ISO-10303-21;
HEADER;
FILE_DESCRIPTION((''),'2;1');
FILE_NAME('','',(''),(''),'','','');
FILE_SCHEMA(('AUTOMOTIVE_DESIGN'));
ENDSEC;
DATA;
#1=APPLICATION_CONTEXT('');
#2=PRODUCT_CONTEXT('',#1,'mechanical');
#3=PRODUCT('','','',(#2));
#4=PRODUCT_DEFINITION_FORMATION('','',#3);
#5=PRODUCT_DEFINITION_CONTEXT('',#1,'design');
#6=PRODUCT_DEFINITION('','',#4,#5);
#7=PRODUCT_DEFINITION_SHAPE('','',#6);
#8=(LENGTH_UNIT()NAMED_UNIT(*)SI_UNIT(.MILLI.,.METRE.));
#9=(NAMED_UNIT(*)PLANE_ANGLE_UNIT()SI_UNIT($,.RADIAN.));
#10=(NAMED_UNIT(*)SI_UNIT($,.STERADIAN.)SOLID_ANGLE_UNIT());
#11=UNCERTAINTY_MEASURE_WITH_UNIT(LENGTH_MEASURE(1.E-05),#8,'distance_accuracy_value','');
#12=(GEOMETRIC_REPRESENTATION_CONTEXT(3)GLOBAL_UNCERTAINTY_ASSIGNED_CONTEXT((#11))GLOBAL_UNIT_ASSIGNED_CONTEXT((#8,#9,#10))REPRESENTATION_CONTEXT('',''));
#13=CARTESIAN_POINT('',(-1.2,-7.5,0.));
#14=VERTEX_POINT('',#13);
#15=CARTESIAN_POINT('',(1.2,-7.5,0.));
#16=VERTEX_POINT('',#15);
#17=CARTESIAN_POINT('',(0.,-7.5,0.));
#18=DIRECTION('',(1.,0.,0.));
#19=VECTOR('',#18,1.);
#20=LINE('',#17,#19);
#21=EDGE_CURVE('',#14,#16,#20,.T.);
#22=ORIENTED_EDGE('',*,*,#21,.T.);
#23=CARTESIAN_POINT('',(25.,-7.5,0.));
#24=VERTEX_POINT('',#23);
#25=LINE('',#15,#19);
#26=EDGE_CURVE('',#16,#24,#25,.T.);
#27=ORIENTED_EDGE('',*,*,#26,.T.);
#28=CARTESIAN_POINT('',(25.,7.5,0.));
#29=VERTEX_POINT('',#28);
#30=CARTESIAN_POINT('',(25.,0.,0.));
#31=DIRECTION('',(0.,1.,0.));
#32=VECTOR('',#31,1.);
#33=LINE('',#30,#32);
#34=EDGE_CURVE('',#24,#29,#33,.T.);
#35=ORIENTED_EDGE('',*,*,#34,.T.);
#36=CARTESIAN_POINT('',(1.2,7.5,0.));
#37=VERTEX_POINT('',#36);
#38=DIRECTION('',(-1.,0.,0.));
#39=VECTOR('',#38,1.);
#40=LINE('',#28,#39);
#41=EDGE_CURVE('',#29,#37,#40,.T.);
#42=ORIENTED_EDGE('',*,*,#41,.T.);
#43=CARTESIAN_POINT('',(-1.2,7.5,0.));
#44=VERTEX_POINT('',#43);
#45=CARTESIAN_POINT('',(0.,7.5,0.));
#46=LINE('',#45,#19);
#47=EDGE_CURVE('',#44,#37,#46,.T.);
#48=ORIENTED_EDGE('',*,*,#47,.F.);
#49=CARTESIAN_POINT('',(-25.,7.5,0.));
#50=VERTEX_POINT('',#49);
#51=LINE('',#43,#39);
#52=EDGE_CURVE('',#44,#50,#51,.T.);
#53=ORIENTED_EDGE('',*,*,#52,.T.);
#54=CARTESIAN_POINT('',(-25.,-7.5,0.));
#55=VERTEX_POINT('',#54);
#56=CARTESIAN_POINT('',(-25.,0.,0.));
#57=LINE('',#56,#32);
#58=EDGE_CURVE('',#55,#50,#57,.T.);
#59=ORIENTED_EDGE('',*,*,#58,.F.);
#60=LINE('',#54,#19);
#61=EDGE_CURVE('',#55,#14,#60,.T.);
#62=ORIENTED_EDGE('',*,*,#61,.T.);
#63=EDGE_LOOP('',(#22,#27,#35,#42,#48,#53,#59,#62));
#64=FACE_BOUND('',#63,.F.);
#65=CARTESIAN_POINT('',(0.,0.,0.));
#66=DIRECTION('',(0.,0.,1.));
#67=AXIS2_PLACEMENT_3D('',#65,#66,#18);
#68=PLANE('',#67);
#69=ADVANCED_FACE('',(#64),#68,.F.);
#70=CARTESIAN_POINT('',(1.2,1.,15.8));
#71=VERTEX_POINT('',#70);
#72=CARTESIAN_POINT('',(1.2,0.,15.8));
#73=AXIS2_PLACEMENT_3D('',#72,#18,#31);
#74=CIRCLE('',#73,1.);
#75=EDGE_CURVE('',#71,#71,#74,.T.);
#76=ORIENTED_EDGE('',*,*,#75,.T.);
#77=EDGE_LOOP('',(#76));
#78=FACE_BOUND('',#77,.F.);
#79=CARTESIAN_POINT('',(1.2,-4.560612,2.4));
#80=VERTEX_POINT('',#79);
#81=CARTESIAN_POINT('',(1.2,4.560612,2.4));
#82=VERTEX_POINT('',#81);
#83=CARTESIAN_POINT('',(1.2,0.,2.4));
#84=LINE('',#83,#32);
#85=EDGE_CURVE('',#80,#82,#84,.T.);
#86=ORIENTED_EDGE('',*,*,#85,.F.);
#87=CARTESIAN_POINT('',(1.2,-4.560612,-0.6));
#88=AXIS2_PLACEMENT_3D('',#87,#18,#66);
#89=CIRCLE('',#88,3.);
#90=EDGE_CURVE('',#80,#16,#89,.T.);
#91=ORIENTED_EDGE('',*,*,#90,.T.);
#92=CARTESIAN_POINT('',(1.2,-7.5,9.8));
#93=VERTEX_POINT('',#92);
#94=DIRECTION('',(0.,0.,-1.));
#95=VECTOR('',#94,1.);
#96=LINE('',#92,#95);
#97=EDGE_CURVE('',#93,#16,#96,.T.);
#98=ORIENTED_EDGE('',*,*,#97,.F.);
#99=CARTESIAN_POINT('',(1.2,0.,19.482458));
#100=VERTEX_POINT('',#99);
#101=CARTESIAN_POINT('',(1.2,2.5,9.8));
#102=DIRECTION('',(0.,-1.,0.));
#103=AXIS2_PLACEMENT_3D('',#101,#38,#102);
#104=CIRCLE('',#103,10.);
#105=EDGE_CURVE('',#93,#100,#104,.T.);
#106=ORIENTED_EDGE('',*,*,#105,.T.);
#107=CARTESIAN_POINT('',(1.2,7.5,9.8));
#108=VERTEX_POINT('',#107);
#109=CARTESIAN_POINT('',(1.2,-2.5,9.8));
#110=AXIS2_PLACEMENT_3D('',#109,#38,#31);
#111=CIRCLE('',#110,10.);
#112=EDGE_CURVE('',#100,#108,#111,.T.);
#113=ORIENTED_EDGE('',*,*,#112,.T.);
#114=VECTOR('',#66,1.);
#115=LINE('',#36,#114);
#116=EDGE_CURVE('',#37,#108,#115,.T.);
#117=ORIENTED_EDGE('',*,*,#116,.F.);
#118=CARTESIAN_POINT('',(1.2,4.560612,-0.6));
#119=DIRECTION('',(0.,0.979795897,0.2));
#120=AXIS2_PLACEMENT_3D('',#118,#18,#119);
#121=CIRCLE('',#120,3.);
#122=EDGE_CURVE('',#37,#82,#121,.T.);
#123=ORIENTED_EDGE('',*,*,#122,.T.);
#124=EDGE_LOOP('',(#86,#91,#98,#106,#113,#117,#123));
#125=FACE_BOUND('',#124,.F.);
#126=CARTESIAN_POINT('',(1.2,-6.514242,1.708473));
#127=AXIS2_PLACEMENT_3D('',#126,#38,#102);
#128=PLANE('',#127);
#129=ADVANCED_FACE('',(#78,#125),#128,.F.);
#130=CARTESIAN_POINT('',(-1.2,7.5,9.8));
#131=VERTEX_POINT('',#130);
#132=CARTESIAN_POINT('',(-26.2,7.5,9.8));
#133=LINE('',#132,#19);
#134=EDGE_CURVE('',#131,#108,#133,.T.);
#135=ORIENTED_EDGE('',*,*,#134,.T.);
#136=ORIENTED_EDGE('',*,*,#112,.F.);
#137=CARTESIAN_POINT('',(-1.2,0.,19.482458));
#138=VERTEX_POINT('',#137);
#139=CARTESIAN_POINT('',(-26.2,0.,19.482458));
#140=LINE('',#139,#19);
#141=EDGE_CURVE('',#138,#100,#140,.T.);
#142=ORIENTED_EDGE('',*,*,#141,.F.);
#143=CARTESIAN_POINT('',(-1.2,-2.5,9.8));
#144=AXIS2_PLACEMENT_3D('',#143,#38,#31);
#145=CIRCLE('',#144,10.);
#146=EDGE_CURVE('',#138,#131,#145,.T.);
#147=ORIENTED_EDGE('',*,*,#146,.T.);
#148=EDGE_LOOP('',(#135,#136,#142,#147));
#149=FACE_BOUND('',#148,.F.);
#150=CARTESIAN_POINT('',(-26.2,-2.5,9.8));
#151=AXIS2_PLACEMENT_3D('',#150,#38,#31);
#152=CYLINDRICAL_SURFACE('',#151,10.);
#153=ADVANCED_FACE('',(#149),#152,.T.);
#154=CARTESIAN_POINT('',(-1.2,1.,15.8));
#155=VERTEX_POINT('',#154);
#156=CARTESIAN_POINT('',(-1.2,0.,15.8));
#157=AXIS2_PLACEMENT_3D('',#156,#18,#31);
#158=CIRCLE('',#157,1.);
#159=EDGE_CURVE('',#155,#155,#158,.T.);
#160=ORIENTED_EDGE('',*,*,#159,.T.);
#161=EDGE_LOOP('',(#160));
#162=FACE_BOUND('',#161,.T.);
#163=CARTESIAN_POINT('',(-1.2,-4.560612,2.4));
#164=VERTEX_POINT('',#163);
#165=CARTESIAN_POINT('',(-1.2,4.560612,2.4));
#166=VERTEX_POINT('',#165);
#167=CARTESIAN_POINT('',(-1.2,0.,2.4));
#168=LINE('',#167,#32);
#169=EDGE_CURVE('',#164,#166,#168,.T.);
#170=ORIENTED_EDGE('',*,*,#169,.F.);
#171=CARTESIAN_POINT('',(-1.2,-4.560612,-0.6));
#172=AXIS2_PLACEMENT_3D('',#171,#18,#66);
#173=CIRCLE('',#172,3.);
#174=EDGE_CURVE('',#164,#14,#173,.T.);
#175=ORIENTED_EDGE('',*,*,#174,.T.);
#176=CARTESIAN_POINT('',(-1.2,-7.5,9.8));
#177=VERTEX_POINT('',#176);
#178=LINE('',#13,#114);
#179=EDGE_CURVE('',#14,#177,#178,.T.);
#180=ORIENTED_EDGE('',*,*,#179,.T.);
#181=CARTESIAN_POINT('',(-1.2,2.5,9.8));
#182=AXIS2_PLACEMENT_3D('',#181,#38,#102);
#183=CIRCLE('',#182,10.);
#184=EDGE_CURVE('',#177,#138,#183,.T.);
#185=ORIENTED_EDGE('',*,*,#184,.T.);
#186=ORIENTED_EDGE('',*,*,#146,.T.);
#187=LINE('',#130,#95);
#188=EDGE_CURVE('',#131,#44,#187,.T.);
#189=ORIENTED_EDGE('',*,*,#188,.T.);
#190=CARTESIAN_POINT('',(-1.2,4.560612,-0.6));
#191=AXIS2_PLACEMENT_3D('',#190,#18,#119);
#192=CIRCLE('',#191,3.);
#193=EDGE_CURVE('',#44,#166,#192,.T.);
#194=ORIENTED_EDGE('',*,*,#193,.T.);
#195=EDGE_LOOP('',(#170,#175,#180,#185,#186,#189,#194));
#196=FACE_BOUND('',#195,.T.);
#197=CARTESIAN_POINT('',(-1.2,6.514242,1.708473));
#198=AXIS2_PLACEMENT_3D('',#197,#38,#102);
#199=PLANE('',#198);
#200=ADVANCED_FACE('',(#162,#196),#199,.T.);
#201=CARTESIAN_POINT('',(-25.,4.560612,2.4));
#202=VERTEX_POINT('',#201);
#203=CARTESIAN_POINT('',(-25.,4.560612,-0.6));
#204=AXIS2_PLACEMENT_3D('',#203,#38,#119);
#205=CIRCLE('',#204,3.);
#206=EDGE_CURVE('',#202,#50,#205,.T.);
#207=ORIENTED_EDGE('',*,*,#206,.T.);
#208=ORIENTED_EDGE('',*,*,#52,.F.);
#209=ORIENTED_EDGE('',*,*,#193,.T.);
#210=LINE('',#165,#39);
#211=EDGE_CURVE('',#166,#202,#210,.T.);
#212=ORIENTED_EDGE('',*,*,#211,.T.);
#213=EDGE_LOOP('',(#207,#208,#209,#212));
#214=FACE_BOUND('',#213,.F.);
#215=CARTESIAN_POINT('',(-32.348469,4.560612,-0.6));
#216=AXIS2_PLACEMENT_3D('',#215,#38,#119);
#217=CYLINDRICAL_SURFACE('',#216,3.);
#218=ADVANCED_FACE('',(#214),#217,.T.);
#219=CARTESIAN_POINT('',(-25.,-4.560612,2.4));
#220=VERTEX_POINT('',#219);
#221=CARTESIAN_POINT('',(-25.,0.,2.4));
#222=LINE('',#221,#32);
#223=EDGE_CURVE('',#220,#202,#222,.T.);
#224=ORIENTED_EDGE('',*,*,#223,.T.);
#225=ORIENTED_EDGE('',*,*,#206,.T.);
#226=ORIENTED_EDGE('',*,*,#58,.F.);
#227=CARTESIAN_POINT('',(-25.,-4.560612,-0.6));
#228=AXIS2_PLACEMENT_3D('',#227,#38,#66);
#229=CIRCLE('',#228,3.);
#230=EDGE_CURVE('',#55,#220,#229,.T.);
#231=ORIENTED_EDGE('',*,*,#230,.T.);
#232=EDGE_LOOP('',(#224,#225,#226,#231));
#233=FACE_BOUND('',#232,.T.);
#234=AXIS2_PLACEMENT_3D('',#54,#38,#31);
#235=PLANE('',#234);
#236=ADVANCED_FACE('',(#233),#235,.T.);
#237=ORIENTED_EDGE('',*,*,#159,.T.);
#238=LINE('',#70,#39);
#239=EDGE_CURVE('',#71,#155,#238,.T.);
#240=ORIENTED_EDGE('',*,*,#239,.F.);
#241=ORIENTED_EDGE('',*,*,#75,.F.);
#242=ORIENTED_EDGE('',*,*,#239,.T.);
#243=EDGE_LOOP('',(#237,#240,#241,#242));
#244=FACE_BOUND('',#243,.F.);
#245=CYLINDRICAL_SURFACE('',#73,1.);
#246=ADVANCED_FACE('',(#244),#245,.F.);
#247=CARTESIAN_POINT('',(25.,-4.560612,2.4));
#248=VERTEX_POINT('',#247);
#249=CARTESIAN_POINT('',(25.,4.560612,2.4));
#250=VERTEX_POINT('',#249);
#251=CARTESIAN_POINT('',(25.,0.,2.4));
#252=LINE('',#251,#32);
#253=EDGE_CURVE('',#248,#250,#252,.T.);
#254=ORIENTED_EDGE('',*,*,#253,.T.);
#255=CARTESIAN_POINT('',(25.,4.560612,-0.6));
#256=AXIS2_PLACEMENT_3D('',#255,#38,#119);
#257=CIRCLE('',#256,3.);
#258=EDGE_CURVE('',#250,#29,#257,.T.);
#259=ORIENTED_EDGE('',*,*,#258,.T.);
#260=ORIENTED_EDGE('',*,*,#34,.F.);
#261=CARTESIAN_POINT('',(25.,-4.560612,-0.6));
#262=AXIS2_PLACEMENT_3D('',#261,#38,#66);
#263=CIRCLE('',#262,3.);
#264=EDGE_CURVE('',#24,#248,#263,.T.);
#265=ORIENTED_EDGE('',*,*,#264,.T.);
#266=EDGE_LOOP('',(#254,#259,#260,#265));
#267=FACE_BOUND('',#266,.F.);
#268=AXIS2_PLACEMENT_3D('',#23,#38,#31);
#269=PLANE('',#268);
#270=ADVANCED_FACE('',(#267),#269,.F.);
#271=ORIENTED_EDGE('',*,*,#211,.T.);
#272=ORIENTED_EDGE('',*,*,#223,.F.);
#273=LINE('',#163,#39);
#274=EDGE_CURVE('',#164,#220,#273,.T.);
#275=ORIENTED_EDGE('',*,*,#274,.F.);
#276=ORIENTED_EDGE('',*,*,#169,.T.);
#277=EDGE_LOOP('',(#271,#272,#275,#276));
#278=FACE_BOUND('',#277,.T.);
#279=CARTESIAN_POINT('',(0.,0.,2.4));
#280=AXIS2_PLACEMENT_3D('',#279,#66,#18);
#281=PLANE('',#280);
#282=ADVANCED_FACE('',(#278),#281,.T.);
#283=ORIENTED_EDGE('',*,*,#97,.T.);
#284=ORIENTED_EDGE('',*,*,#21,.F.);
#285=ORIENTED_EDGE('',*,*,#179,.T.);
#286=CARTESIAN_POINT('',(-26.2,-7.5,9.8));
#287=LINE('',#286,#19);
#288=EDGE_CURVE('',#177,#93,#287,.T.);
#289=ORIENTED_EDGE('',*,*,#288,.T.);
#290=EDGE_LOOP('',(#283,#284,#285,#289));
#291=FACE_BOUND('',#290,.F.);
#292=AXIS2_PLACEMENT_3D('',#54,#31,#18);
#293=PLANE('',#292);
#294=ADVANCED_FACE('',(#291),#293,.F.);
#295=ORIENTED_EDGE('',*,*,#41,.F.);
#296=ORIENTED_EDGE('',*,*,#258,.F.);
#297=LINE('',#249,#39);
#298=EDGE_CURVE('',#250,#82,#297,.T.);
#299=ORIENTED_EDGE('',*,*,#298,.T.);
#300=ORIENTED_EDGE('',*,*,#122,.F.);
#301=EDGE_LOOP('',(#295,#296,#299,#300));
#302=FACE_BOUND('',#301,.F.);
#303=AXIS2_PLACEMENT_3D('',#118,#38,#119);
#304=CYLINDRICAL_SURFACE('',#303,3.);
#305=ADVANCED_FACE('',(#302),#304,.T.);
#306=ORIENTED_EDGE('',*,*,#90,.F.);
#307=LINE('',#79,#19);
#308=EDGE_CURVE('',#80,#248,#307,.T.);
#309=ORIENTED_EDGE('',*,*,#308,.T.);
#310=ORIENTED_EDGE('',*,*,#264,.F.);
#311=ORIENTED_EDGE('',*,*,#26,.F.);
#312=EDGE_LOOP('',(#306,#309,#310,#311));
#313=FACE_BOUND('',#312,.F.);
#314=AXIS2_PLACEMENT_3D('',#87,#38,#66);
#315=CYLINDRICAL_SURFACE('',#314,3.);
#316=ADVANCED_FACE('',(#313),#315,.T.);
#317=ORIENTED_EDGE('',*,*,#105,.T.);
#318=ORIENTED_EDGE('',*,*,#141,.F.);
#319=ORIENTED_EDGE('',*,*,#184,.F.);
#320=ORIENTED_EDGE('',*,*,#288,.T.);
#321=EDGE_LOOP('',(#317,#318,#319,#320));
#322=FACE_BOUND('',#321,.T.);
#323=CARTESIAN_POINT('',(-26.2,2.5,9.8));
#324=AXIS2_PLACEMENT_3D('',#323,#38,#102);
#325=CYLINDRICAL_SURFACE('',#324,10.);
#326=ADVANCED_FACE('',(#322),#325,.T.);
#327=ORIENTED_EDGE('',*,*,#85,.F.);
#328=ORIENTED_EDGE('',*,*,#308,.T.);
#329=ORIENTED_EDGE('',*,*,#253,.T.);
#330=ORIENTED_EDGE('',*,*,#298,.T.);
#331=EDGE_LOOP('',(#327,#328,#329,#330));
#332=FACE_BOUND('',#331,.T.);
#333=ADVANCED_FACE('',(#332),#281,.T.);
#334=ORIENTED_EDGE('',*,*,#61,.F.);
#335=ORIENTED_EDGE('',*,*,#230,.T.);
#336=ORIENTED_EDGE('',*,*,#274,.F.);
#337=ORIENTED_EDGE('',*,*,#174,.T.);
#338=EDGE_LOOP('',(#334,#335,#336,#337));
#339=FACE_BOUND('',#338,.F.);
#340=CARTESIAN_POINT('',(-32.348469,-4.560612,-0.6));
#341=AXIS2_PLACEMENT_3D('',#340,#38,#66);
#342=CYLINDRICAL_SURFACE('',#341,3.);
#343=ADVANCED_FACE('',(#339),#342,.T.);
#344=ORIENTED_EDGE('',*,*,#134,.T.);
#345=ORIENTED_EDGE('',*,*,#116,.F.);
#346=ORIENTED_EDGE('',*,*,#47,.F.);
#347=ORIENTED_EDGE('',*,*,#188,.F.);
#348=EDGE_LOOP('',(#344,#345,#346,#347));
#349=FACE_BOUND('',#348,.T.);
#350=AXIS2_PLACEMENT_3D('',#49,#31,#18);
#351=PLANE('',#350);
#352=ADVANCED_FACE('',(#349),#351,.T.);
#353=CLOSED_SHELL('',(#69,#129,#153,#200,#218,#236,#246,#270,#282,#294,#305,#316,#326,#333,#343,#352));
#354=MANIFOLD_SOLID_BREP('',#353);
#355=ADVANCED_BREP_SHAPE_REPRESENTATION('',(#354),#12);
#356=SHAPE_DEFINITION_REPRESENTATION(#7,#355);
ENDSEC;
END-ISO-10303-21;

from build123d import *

# Parameters (mm, degrees)
F0_W         = 50
F0_H         = 15
F2_DEPTH     = 2.4
F3_W         = 2.4
F3_H         = 15
F4_DEPTH     = 17.4
F6_T1_DEPTH  = 52.4
F5_R         = 1
F7_DEPTH     = 26.201
F8_T1_DEPTH  = 31.1484692284
F8_T3_DEPTH  = 31.1484692284
F8_T8_DEPTH  = 38.4969384567
F8_T13_DEPTH = 38.4969384567
F8_T18_DEPTH = 38.4969384567
F8_T23_DEPTH = 38.4969384567


# Not quite as in the source:
# - a fillet or chamfer that OpenCascade refuses, or shapes differently, is made with other operations: its cross-section is extruded or revolved along the edge and cut away or added


with BuildPart() as f2:
    # F0 (on Top) → F2 (new body)
    with BuildSketch(Plane.XY):
        Rectangle(F0_W, F0_H)
    extrude(amount=F2_DEPTH)

    # F3 (on face) → F4 (join)
    with BuildSketch(Plane.XY.offset(2.4)):
        Rectangle(F3_W, F3_H)
    extrude(amount=F4_DEPTH)

    # F6: fillet of radius 10 on 2 edges, made by hand

    # F6_s2 → F6_t1 (cut)
    with BuildSketch(Plane.YZ.offset(-26.2)):
        with BuildLine():
            ThreePointArc((-7.5, 9.8), (-4.5710678119, 16.8710678119), (2.5, 19.8))
            Line((2.5, 19.8), (-7.5, 19.8))
            Line((-7.5, 19.8), (-7.5, 9.8))
        make_face()
        with BuildLine():
            ThreePointArc((7.5, 9.8), (4.5710678119, 16.8710678119), (-2.5, 19.8))
            Line((-2.5, 19.8), (7.5, 19.8))
            Line((7.5, 19.8), (7.5, 9.8))
        make_face()
    extrude(amount=F6_T1_DEPTH, mode=Mode.SUBTRACT)

    # F5 (on face) → F7 (cut, through all)
    with BuildSketch(Plane.YZ.offset(1.2)):
        with Locations((0, 15.8)):
            Circle(F5_R)
    extrude(amount=-F7_DEPTH, mode=Mode.SUBTRACT)

    # F8: fillet of radius 3 on 4 edges, made by hand

    # F8_s2 → F8_t1 (cut)
    with BuildSketch(Plane.YZ.offset(-32.3484692284)):
        with BuildLine():
            ThreePointArc((-4.5606123087, 2.4), (-6.4579789048, 1.7237900077), (-7.5, 0))
            Line((-7.5, 0), (-7.5, 2.4))
            Line((-7.5, 2.4), (-4.5606123087, 2.4))
        make_face()
        with BuildLine():
            ThreePointArc((7.5, 0), (6.4579789048, 1.7237900077), (4.5606123087, 2.4))
            Line((4.5606123087, 2.4), (7.5, 2.4))
            Line((7.5, 2.4), (7.5, 0))
        make_face()
    extrude(amount=F8_T1_DEPTH, mode=Mode.SUBTRACT)

    # F8_s4 → F8_t3 (cut)
    with BuildSketch(Plane.YZ.offset(1.2)):
        with BuildLine():
            ThreePointArc((-4.5606123087, 2.4), (-6.4579789048, 1.7237900077), (-7.5, 0))
            Line((-7.5, 0), (-7.5, 2.4))
            Line((-7.5, 2.4), (-4.5606123087, 2.4))
        make_face()
        with BuildLine():
            ThreePointArc((7.5, 0), (6.4579789048, 1.7237900077), (4.5606123087, 2.4))
            Line((4.5606123087, 2.4), (7.5, 2.4))
            Line((7.5, 2.4), (7.5, 0))
        make_face()
    extrude(amount=F8_T3_DEPTH, mode=Mode.SUBTRACT)


with BuildPart() as f8_tool6:
    # F8_s7 → F8_t8 (new body)
    with BuildSketch(Plane.YZ.offset(-32.3484692284)):
        with BuildLine():
            ThreePointArc((-4.5606123087, 2.4), (-6.4579789048, 1.7237900077), (-7.5, 0))
            Line((-7.5, 0), (-7.5, 2.4))
            Line((-7.5, 2.4), (-4.5606123087, 2.4))
        make_face()
    extrude(amount=F8_T8_DEPTH)

    split(bisect_by=Plane.YZ.offset(1.2), keep=Keep.TOP)


with BuildPart() as f2_1:
    add(f2.part)

    # F8_t5: cut F8_tool6
    add(f8_tool6.part, mode=Mode.SUBTRACT)


with BuildPart() as f8_tool11:
    # F8_s12 → F8_t13 (new body)
    with BuildSketch(Plane.YZ.offset(-6.1484692284)):
        with BuildLine():
            ThreePointArc((-4.5606123087, 2.4), (-6.4579789048, 1.7237900077), (-7.5, 0))
            Line((-7.5, 0), (-7.5, 2.4))
            Line((-7.5, 2.4), (-4.5606123087, 2.4))
        make_face()
    extrude(amount=F8_T13_DEPTH)

    split(bisect_by=Plane.YZ.offset(-1.2), keep=Keep.BOTTOM)


with BuildPart() as f2_2:
    add(f2_1.part)

    # F8_t10: cut F8_tool11
    add(f8_tool11.part, mode=Mode.SUBTRACT)


with BuildPart() as f8_tool16:
    # F8_s17 → F8_t18 (new body)
    with BuildSketch(Plane.YZ.offset(32.3484692284)):
        with BuildLine():
            ThreePointArc((7.5, 0), (6.4579789048, 1.7237900077), (4.5606123087, 2.4))
            Line((4.5606123087, 2.4), (7.5, 2.4))
            Line((7.5, 2.4), (7.5, 0))
        make_face()
    extrude(amount=-F8_T18_DEPTH)

    split(bisect_by=Plane.YZ.offset(-1.2), keep=Keep.BOTTOM)


with BuildPart() as f2_3:
    add(f2_2.part)

    # F8_t15: cut F8_tool16
    add(f8_tool16.part, mode=Mode.SUBTRACT)


with BuildPart() as f8_tool21:
    # F8_s22 → F8_t23 (new body)
    with BuildSketch(Plane.YZ.offset(6.1484692284)):
        with BuildLine():
            ThreePointArc((7.5, 0), (6.4579789048, 1.7237900077), (4.5606123087, 2.4))
            Line((4.5606123087, 2.4), (7.5, 2.4))
            Line((7.5, 2.4), (7.5, 0))
        make_face()
    extrude(amount=-F8_T23_DEPTH)

    split(bisect_by=Plane.YZ.offset(1.2), keep=Keep.TOP)


with BuildPart() as f2_4:
    add(f2_3.part)

    # F8_t20: cut F8_tool21
    add(f8_tool21.part, mode=Mode.SUBTRACT)


solid = f2_4.part
